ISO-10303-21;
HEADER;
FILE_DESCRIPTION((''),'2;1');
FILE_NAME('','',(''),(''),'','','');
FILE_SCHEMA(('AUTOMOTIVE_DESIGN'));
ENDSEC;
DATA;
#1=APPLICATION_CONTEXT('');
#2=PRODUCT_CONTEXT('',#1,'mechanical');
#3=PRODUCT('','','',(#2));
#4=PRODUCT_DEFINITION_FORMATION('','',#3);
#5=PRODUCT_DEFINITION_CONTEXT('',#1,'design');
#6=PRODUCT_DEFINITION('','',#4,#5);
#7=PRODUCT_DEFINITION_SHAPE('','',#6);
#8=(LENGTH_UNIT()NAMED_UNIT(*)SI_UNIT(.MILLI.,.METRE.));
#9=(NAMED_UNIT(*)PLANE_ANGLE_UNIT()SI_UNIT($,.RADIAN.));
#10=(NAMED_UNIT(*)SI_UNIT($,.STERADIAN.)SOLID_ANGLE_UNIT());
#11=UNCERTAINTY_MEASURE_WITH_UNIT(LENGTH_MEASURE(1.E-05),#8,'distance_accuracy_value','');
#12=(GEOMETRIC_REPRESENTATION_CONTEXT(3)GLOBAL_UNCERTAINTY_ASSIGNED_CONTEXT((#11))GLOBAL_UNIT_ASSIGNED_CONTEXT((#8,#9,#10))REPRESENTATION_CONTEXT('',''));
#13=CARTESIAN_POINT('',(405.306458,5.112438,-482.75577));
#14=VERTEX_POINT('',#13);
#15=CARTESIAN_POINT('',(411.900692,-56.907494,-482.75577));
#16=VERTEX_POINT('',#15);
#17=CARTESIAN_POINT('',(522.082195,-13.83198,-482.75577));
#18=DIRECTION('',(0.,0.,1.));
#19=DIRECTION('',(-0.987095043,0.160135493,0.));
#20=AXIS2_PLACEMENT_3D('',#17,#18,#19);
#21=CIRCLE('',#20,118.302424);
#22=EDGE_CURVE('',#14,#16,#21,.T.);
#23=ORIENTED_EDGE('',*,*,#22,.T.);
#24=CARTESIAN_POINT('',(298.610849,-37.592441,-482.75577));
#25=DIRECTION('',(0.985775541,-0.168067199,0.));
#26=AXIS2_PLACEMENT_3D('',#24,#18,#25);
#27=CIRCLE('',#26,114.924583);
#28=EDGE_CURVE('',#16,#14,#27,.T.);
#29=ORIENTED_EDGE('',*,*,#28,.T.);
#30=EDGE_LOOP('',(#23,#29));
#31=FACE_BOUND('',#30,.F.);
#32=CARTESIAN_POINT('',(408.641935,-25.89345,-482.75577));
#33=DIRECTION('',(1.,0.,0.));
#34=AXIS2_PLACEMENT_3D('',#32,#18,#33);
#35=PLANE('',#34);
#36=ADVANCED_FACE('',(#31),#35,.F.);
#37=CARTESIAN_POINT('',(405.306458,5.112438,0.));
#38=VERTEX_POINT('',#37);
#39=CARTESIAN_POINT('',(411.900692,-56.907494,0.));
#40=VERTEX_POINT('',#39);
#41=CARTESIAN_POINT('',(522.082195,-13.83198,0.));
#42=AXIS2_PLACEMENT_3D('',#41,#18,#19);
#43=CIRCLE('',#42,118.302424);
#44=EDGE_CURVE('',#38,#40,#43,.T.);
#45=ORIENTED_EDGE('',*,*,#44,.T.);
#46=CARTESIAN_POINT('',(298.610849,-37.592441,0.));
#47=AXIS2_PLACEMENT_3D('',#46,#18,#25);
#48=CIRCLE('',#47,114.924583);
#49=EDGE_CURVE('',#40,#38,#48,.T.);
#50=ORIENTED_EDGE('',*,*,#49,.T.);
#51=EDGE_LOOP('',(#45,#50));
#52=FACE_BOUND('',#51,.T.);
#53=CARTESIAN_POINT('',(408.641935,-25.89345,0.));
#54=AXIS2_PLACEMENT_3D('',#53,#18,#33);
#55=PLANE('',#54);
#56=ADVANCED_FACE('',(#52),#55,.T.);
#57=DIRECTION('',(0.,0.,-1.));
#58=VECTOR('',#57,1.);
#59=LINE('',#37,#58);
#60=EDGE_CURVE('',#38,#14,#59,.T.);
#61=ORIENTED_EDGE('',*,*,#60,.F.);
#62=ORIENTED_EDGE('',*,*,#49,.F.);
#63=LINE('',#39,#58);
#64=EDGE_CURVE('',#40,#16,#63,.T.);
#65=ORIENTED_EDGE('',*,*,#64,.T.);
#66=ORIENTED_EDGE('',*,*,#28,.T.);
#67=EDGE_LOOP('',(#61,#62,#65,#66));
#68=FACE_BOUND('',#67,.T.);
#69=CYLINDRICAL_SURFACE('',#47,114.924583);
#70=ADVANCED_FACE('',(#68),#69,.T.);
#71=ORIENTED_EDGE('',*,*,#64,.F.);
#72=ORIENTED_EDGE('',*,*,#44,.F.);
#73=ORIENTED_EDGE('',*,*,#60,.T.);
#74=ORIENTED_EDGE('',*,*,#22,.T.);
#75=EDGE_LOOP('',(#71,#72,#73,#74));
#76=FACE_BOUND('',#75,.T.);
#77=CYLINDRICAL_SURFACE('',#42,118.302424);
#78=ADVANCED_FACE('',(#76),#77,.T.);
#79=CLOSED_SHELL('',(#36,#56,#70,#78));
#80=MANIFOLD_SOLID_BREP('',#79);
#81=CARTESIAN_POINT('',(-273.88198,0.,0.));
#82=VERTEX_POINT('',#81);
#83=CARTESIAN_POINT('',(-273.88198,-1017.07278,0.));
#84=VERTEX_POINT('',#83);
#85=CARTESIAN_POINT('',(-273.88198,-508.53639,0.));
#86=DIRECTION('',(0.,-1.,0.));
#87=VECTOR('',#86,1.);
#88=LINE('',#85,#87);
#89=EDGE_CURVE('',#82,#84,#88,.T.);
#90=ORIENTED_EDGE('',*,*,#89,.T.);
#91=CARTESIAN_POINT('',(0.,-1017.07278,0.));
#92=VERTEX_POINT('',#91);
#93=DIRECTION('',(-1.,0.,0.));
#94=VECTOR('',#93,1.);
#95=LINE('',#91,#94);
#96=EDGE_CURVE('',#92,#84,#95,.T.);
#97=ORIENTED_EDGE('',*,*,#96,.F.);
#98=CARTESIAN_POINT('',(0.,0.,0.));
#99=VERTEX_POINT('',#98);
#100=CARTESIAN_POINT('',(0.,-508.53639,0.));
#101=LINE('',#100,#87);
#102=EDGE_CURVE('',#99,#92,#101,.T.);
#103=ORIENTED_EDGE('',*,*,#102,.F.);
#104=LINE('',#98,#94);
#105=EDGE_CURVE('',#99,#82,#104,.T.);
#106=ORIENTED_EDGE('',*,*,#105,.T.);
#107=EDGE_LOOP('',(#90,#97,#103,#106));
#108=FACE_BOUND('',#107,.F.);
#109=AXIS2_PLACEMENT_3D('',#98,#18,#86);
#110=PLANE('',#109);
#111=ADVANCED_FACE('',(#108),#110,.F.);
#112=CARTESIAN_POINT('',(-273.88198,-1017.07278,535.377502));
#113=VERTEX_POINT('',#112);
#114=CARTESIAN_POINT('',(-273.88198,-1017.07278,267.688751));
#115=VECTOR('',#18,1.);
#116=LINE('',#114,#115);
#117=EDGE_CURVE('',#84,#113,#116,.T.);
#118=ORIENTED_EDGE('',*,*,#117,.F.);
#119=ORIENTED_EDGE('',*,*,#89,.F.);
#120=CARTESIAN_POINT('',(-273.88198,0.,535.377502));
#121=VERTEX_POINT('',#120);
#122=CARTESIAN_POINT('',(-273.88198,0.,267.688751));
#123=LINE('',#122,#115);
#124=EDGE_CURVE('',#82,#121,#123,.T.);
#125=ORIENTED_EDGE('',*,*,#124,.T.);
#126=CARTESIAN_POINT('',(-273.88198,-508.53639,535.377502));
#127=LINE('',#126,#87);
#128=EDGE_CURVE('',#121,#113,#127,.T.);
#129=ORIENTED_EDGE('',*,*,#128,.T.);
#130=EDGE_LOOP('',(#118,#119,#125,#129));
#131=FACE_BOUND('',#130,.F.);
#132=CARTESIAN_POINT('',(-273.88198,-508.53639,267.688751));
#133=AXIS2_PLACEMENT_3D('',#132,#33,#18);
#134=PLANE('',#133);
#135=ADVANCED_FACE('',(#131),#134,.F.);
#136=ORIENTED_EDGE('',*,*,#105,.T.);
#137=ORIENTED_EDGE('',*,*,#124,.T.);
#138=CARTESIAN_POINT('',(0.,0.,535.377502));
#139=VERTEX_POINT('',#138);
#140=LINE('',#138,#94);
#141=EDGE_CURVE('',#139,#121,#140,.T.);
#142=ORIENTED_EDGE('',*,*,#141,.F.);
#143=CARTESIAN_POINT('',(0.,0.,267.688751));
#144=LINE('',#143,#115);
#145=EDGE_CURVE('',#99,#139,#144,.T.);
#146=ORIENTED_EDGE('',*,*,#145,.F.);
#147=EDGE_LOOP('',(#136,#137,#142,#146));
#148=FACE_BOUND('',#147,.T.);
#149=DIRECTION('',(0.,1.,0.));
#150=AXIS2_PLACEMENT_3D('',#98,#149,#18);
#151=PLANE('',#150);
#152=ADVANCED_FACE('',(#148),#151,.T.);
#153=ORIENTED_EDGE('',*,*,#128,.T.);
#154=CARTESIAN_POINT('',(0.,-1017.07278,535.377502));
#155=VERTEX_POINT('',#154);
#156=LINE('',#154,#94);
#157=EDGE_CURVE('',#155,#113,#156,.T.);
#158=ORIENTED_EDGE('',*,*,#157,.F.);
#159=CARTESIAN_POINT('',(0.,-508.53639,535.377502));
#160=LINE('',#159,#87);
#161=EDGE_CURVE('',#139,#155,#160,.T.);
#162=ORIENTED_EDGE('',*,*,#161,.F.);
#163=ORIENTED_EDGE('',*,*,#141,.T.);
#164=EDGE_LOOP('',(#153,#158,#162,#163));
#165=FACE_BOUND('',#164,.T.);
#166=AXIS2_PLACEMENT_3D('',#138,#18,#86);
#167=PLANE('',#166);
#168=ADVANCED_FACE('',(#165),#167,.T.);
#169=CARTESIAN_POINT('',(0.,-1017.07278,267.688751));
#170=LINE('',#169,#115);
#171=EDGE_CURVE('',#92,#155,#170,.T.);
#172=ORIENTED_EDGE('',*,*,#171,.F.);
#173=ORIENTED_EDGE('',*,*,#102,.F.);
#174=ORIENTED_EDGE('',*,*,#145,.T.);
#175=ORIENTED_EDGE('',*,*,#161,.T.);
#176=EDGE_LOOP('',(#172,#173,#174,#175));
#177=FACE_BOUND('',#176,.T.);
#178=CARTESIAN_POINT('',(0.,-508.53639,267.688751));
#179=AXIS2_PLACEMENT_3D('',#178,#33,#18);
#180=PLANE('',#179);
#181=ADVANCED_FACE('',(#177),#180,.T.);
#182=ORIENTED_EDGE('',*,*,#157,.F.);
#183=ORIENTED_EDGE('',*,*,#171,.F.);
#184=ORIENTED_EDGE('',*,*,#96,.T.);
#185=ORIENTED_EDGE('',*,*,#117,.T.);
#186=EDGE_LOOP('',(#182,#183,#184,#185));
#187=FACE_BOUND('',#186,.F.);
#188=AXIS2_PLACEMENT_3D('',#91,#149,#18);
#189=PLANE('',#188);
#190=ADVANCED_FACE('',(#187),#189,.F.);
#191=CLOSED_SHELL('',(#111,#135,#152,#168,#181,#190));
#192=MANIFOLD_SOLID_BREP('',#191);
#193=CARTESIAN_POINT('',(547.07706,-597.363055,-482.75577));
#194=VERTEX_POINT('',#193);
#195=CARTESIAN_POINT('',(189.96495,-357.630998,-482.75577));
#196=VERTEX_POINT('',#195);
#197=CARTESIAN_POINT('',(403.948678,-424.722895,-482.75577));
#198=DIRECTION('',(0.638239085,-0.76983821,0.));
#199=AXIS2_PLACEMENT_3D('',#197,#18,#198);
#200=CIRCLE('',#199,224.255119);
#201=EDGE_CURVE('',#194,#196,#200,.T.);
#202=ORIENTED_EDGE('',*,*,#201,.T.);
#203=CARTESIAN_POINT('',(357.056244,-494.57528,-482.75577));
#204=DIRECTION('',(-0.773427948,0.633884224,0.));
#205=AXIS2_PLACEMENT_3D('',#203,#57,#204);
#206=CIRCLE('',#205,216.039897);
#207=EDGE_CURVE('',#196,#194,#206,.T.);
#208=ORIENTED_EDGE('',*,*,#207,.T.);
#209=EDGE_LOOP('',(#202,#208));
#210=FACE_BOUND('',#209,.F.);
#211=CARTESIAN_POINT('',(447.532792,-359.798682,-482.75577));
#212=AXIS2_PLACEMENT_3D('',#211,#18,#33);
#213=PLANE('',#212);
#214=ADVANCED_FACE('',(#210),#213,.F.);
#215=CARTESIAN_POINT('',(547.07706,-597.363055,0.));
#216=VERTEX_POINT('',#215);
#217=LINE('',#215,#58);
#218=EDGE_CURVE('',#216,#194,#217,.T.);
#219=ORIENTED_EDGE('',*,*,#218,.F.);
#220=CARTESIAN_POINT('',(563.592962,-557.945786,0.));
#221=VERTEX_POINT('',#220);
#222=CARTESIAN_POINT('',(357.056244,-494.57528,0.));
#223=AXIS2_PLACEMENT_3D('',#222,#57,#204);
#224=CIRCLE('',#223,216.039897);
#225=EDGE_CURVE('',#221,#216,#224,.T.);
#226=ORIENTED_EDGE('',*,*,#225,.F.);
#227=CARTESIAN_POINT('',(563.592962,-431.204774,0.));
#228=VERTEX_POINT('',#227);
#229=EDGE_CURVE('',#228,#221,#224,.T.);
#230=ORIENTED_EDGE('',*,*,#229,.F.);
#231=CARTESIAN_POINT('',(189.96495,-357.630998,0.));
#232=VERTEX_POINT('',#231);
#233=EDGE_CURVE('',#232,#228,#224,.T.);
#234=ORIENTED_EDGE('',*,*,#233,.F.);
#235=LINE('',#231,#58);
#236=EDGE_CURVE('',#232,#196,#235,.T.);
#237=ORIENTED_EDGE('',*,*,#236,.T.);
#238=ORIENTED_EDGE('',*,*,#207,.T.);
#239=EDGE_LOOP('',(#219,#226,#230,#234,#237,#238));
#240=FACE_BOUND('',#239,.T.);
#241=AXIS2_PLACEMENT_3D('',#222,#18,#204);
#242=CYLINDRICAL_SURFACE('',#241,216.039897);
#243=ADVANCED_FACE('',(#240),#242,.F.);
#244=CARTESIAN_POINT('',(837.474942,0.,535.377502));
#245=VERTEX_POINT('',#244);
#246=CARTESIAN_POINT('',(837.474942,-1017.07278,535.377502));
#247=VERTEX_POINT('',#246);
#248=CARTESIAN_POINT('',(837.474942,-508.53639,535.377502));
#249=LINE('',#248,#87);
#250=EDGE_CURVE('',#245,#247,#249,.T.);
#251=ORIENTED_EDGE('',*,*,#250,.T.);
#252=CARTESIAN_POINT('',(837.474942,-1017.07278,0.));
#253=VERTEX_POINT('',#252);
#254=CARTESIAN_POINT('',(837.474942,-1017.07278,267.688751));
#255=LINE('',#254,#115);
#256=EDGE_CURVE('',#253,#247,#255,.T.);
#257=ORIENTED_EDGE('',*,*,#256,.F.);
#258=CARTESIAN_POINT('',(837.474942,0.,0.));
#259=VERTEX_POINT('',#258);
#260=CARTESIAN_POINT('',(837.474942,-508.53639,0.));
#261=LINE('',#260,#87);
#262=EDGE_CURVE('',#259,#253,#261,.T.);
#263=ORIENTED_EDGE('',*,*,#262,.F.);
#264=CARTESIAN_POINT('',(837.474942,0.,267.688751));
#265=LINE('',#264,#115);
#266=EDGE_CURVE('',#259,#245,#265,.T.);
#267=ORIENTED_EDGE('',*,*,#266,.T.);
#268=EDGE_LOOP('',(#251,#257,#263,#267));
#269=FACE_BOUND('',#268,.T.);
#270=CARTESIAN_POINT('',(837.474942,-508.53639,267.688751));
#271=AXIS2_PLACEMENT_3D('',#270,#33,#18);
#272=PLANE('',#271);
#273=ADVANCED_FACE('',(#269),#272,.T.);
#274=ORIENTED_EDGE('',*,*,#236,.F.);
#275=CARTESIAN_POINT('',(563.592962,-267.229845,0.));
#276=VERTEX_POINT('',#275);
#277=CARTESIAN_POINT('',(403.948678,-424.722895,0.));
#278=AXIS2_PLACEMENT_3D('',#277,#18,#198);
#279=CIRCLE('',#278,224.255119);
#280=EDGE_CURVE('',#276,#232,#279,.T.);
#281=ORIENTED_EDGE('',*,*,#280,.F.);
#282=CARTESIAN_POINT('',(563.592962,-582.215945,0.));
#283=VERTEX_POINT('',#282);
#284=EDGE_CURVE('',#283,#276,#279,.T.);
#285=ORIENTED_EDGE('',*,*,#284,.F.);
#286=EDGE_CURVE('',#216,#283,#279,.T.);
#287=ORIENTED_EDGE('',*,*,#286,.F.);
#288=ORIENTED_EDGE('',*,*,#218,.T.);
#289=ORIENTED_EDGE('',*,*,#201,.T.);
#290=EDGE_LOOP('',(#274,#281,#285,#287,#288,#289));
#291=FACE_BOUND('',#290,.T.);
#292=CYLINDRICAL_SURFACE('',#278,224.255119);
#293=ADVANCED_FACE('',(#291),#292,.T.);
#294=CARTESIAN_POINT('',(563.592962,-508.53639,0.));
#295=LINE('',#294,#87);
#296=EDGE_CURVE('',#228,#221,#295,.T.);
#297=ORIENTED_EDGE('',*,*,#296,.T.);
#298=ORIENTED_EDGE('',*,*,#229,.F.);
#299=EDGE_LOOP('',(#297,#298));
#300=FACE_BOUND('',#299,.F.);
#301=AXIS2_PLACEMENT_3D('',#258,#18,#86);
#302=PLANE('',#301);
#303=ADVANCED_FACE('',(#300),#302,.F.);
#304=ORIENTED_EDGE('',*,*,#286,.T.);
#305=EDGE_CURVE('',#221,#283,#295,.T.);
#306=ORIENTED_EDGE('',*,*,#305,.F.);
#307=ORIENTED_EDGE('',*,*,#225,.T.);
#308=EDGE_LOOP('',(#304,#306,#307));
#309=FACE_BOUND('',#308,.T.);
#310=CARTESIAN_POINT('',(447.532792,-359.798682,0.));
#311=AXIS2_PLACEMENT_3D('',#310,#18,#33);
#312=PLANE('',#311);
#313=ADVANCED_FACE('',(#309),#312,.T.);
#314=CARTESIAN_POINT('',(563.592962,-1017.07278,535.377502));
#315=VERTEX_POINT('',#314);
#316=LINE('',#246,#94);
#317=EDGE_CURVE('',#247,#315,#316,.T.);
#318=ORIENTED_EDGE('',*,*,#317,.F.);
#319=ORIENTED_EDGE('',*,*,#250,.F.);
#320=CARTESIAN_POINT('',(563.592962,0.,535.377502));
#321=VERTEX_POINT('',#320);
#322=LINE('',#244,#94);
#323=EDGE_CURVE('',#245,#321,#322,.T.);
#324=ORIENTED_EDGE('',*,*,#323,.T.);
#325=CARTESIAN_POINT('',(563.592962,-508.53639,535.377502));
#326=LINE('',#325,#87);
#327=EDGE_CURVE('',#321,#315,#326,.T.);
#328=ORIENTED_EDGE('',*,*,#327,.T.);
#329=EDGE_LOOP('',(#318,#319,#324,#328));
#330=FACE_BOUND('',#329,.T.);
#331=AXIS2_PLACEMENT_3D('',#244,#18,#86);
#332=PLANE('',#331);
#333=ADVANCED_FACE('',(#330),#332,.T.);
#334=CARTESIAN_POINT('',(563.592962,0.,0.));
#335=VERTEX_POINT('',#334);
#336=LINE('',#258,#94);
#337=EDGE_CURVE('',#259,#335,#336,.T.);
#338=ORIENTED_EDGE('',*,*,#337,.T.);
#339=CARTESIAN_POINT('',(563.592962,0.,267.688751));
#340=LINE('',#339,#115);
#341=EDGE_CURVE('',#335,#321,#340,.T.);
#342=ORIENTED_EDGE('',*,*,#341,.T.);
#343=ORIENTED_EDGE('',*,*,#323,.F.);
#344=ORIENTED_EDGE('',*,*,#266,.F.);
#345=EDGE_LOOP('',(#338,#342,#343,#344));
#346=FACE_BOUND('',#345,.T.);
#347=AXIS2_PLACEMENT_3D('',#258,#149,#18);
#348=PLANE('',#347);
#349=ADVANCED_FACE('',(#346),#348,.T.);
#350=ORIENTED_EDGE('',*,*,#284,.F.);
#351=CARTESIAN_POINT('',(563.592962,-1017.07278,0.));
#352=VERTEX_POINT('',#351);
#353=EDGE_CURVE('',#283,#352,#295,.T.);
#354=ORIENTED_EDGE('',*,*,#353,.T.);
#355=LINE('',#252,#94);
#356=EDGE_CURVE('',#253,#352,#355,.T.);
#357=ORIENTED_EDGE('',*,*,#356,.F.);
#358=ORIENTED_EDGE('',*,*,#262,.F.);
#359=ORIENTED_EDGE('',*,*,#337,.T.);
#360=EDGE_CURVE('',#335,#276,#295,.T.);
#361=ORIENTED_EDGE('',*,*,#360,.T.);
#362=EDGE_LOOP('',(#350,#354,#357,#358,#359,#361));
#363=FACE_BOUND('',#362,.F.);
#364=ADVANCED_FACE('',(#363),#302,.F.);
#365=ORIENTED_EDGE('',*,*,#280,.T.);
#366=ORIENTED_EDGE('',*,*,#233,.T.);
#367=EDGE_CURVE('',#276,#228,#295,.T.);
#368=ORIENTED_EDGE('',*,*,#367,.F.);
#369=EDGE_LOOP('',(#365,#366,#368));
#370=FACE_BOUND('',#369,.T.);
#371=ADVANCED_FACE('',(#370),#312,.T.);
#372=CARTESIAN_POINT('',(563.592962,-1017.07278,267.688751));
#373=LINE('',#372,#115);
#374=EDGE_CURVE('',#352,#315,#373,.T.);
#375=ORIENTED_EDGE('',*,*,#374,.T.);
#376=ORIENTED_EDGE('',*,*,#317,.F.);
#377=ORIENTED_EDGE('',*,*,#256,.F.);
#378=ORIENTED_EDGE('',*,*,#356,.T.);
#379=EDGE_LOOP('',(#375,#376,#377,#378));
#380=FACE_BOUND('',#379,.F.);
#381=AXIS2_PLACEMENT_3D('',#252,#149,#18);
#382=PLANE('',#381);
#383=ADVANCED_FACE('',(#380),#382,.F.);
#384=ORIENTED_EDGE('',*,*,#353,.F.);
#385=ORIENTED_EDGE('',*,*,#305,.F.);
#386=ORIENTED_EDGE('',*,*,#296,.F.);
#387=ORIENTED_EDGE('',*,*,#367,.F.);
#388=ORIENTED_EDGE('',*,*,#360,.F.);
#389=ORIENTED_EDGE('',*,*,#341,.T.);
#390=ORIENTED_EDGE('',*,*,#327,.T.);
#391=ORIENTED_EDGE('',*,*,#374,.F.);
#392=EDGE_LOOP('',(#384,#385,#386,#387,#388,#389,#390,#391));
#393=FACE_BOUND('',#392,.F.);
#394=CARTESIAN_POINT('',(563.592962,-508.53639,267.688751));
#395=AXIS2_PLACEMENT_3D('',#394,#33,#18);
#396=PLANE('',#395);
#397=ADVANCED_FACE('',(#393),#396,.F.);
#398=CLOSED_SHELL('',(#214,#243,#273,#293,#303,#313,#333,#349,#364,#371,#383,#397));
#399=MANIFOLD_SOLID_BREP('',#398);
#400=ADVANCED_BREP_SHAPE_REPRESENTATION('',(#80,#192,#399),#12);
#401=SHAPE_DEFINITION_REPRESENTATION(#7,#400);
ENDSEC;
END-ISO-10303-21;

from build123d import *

# Parameters (mm, degrees)
F3_DEPTH      = 482.75577
F1_E0_RIGHT_W = 535.3775024414
F1_E0_RIGHT_H = 1017.07278
F4_DEPTH      = 273.88198
F1_E0_LEFT_W  = 535.3775024414
F1_E0_LEFT_H  = 1017.07278


with BuildPart() as f3:
    # F2 (on Top) → F3 (new body)
    with BuildSketch(Plane.XY):
        with BuildLine():
            ThreePointArc((189.9649500847, -357.6309978962), (477.4693061455, -315.2043475455), (547.0770597458, -597.3630547523))
            ThreePointArc((547.0770597458, -597.3630547523), (528.9406165931, -238.5311295286), (189.9649500847, -357.6309978962))
        make_face()
    extrude(amount=-F3_DEPTH)

    # F1_E0_right (on explicit) → F4 (join)
    with BuildSketch(Plane(origin=(837.4749422073, 0, 0), x_dir=(0, 0, 1), z_dir=(1, 0, 0))):
        with Locations((267.6887512207, 508.53639)):
            Rectangle(F1_E0_RIGHT_W, F1_E0_RIGHT_H)
    extrude(amount=-F4_DEPTH)


with BuildPart() as f3b:
    # F2 (on Top) → F3, piece 2 (new body)
    with BuildSketch(Plane.XY):
        with BuildLine():
            ThreePointArc((405.3064584732, 5.1124375314), (404.4428515066, -26.3399147003), (411.900691804, -56.9074938651))
            ThreePointArc((411.900691804, -56.9074938651), (412.8912838015, -25.4416400235), (405.3064584732, 5.1124375314))
        make_face()
    extrude(amount=-F3_DEPTH)


with BuildPart() as f4:
    # F1_E0_left (on explicit) → F4, piece 2 (new body)
    with BuildSketch(Plane(origin=(0, 0, 0), x_dir=(0, 0, 1), z_dir=(1, 0, 0))):
        with Locations((267.6887512207, 508.53639)):
            Rectangle(F1_E0_LEFT_W, F1_E0_LEFT_H)
    extrude(amount=-F4_DEPTH)


solid = Compound([f3.part, f3b.part, f4.part])
